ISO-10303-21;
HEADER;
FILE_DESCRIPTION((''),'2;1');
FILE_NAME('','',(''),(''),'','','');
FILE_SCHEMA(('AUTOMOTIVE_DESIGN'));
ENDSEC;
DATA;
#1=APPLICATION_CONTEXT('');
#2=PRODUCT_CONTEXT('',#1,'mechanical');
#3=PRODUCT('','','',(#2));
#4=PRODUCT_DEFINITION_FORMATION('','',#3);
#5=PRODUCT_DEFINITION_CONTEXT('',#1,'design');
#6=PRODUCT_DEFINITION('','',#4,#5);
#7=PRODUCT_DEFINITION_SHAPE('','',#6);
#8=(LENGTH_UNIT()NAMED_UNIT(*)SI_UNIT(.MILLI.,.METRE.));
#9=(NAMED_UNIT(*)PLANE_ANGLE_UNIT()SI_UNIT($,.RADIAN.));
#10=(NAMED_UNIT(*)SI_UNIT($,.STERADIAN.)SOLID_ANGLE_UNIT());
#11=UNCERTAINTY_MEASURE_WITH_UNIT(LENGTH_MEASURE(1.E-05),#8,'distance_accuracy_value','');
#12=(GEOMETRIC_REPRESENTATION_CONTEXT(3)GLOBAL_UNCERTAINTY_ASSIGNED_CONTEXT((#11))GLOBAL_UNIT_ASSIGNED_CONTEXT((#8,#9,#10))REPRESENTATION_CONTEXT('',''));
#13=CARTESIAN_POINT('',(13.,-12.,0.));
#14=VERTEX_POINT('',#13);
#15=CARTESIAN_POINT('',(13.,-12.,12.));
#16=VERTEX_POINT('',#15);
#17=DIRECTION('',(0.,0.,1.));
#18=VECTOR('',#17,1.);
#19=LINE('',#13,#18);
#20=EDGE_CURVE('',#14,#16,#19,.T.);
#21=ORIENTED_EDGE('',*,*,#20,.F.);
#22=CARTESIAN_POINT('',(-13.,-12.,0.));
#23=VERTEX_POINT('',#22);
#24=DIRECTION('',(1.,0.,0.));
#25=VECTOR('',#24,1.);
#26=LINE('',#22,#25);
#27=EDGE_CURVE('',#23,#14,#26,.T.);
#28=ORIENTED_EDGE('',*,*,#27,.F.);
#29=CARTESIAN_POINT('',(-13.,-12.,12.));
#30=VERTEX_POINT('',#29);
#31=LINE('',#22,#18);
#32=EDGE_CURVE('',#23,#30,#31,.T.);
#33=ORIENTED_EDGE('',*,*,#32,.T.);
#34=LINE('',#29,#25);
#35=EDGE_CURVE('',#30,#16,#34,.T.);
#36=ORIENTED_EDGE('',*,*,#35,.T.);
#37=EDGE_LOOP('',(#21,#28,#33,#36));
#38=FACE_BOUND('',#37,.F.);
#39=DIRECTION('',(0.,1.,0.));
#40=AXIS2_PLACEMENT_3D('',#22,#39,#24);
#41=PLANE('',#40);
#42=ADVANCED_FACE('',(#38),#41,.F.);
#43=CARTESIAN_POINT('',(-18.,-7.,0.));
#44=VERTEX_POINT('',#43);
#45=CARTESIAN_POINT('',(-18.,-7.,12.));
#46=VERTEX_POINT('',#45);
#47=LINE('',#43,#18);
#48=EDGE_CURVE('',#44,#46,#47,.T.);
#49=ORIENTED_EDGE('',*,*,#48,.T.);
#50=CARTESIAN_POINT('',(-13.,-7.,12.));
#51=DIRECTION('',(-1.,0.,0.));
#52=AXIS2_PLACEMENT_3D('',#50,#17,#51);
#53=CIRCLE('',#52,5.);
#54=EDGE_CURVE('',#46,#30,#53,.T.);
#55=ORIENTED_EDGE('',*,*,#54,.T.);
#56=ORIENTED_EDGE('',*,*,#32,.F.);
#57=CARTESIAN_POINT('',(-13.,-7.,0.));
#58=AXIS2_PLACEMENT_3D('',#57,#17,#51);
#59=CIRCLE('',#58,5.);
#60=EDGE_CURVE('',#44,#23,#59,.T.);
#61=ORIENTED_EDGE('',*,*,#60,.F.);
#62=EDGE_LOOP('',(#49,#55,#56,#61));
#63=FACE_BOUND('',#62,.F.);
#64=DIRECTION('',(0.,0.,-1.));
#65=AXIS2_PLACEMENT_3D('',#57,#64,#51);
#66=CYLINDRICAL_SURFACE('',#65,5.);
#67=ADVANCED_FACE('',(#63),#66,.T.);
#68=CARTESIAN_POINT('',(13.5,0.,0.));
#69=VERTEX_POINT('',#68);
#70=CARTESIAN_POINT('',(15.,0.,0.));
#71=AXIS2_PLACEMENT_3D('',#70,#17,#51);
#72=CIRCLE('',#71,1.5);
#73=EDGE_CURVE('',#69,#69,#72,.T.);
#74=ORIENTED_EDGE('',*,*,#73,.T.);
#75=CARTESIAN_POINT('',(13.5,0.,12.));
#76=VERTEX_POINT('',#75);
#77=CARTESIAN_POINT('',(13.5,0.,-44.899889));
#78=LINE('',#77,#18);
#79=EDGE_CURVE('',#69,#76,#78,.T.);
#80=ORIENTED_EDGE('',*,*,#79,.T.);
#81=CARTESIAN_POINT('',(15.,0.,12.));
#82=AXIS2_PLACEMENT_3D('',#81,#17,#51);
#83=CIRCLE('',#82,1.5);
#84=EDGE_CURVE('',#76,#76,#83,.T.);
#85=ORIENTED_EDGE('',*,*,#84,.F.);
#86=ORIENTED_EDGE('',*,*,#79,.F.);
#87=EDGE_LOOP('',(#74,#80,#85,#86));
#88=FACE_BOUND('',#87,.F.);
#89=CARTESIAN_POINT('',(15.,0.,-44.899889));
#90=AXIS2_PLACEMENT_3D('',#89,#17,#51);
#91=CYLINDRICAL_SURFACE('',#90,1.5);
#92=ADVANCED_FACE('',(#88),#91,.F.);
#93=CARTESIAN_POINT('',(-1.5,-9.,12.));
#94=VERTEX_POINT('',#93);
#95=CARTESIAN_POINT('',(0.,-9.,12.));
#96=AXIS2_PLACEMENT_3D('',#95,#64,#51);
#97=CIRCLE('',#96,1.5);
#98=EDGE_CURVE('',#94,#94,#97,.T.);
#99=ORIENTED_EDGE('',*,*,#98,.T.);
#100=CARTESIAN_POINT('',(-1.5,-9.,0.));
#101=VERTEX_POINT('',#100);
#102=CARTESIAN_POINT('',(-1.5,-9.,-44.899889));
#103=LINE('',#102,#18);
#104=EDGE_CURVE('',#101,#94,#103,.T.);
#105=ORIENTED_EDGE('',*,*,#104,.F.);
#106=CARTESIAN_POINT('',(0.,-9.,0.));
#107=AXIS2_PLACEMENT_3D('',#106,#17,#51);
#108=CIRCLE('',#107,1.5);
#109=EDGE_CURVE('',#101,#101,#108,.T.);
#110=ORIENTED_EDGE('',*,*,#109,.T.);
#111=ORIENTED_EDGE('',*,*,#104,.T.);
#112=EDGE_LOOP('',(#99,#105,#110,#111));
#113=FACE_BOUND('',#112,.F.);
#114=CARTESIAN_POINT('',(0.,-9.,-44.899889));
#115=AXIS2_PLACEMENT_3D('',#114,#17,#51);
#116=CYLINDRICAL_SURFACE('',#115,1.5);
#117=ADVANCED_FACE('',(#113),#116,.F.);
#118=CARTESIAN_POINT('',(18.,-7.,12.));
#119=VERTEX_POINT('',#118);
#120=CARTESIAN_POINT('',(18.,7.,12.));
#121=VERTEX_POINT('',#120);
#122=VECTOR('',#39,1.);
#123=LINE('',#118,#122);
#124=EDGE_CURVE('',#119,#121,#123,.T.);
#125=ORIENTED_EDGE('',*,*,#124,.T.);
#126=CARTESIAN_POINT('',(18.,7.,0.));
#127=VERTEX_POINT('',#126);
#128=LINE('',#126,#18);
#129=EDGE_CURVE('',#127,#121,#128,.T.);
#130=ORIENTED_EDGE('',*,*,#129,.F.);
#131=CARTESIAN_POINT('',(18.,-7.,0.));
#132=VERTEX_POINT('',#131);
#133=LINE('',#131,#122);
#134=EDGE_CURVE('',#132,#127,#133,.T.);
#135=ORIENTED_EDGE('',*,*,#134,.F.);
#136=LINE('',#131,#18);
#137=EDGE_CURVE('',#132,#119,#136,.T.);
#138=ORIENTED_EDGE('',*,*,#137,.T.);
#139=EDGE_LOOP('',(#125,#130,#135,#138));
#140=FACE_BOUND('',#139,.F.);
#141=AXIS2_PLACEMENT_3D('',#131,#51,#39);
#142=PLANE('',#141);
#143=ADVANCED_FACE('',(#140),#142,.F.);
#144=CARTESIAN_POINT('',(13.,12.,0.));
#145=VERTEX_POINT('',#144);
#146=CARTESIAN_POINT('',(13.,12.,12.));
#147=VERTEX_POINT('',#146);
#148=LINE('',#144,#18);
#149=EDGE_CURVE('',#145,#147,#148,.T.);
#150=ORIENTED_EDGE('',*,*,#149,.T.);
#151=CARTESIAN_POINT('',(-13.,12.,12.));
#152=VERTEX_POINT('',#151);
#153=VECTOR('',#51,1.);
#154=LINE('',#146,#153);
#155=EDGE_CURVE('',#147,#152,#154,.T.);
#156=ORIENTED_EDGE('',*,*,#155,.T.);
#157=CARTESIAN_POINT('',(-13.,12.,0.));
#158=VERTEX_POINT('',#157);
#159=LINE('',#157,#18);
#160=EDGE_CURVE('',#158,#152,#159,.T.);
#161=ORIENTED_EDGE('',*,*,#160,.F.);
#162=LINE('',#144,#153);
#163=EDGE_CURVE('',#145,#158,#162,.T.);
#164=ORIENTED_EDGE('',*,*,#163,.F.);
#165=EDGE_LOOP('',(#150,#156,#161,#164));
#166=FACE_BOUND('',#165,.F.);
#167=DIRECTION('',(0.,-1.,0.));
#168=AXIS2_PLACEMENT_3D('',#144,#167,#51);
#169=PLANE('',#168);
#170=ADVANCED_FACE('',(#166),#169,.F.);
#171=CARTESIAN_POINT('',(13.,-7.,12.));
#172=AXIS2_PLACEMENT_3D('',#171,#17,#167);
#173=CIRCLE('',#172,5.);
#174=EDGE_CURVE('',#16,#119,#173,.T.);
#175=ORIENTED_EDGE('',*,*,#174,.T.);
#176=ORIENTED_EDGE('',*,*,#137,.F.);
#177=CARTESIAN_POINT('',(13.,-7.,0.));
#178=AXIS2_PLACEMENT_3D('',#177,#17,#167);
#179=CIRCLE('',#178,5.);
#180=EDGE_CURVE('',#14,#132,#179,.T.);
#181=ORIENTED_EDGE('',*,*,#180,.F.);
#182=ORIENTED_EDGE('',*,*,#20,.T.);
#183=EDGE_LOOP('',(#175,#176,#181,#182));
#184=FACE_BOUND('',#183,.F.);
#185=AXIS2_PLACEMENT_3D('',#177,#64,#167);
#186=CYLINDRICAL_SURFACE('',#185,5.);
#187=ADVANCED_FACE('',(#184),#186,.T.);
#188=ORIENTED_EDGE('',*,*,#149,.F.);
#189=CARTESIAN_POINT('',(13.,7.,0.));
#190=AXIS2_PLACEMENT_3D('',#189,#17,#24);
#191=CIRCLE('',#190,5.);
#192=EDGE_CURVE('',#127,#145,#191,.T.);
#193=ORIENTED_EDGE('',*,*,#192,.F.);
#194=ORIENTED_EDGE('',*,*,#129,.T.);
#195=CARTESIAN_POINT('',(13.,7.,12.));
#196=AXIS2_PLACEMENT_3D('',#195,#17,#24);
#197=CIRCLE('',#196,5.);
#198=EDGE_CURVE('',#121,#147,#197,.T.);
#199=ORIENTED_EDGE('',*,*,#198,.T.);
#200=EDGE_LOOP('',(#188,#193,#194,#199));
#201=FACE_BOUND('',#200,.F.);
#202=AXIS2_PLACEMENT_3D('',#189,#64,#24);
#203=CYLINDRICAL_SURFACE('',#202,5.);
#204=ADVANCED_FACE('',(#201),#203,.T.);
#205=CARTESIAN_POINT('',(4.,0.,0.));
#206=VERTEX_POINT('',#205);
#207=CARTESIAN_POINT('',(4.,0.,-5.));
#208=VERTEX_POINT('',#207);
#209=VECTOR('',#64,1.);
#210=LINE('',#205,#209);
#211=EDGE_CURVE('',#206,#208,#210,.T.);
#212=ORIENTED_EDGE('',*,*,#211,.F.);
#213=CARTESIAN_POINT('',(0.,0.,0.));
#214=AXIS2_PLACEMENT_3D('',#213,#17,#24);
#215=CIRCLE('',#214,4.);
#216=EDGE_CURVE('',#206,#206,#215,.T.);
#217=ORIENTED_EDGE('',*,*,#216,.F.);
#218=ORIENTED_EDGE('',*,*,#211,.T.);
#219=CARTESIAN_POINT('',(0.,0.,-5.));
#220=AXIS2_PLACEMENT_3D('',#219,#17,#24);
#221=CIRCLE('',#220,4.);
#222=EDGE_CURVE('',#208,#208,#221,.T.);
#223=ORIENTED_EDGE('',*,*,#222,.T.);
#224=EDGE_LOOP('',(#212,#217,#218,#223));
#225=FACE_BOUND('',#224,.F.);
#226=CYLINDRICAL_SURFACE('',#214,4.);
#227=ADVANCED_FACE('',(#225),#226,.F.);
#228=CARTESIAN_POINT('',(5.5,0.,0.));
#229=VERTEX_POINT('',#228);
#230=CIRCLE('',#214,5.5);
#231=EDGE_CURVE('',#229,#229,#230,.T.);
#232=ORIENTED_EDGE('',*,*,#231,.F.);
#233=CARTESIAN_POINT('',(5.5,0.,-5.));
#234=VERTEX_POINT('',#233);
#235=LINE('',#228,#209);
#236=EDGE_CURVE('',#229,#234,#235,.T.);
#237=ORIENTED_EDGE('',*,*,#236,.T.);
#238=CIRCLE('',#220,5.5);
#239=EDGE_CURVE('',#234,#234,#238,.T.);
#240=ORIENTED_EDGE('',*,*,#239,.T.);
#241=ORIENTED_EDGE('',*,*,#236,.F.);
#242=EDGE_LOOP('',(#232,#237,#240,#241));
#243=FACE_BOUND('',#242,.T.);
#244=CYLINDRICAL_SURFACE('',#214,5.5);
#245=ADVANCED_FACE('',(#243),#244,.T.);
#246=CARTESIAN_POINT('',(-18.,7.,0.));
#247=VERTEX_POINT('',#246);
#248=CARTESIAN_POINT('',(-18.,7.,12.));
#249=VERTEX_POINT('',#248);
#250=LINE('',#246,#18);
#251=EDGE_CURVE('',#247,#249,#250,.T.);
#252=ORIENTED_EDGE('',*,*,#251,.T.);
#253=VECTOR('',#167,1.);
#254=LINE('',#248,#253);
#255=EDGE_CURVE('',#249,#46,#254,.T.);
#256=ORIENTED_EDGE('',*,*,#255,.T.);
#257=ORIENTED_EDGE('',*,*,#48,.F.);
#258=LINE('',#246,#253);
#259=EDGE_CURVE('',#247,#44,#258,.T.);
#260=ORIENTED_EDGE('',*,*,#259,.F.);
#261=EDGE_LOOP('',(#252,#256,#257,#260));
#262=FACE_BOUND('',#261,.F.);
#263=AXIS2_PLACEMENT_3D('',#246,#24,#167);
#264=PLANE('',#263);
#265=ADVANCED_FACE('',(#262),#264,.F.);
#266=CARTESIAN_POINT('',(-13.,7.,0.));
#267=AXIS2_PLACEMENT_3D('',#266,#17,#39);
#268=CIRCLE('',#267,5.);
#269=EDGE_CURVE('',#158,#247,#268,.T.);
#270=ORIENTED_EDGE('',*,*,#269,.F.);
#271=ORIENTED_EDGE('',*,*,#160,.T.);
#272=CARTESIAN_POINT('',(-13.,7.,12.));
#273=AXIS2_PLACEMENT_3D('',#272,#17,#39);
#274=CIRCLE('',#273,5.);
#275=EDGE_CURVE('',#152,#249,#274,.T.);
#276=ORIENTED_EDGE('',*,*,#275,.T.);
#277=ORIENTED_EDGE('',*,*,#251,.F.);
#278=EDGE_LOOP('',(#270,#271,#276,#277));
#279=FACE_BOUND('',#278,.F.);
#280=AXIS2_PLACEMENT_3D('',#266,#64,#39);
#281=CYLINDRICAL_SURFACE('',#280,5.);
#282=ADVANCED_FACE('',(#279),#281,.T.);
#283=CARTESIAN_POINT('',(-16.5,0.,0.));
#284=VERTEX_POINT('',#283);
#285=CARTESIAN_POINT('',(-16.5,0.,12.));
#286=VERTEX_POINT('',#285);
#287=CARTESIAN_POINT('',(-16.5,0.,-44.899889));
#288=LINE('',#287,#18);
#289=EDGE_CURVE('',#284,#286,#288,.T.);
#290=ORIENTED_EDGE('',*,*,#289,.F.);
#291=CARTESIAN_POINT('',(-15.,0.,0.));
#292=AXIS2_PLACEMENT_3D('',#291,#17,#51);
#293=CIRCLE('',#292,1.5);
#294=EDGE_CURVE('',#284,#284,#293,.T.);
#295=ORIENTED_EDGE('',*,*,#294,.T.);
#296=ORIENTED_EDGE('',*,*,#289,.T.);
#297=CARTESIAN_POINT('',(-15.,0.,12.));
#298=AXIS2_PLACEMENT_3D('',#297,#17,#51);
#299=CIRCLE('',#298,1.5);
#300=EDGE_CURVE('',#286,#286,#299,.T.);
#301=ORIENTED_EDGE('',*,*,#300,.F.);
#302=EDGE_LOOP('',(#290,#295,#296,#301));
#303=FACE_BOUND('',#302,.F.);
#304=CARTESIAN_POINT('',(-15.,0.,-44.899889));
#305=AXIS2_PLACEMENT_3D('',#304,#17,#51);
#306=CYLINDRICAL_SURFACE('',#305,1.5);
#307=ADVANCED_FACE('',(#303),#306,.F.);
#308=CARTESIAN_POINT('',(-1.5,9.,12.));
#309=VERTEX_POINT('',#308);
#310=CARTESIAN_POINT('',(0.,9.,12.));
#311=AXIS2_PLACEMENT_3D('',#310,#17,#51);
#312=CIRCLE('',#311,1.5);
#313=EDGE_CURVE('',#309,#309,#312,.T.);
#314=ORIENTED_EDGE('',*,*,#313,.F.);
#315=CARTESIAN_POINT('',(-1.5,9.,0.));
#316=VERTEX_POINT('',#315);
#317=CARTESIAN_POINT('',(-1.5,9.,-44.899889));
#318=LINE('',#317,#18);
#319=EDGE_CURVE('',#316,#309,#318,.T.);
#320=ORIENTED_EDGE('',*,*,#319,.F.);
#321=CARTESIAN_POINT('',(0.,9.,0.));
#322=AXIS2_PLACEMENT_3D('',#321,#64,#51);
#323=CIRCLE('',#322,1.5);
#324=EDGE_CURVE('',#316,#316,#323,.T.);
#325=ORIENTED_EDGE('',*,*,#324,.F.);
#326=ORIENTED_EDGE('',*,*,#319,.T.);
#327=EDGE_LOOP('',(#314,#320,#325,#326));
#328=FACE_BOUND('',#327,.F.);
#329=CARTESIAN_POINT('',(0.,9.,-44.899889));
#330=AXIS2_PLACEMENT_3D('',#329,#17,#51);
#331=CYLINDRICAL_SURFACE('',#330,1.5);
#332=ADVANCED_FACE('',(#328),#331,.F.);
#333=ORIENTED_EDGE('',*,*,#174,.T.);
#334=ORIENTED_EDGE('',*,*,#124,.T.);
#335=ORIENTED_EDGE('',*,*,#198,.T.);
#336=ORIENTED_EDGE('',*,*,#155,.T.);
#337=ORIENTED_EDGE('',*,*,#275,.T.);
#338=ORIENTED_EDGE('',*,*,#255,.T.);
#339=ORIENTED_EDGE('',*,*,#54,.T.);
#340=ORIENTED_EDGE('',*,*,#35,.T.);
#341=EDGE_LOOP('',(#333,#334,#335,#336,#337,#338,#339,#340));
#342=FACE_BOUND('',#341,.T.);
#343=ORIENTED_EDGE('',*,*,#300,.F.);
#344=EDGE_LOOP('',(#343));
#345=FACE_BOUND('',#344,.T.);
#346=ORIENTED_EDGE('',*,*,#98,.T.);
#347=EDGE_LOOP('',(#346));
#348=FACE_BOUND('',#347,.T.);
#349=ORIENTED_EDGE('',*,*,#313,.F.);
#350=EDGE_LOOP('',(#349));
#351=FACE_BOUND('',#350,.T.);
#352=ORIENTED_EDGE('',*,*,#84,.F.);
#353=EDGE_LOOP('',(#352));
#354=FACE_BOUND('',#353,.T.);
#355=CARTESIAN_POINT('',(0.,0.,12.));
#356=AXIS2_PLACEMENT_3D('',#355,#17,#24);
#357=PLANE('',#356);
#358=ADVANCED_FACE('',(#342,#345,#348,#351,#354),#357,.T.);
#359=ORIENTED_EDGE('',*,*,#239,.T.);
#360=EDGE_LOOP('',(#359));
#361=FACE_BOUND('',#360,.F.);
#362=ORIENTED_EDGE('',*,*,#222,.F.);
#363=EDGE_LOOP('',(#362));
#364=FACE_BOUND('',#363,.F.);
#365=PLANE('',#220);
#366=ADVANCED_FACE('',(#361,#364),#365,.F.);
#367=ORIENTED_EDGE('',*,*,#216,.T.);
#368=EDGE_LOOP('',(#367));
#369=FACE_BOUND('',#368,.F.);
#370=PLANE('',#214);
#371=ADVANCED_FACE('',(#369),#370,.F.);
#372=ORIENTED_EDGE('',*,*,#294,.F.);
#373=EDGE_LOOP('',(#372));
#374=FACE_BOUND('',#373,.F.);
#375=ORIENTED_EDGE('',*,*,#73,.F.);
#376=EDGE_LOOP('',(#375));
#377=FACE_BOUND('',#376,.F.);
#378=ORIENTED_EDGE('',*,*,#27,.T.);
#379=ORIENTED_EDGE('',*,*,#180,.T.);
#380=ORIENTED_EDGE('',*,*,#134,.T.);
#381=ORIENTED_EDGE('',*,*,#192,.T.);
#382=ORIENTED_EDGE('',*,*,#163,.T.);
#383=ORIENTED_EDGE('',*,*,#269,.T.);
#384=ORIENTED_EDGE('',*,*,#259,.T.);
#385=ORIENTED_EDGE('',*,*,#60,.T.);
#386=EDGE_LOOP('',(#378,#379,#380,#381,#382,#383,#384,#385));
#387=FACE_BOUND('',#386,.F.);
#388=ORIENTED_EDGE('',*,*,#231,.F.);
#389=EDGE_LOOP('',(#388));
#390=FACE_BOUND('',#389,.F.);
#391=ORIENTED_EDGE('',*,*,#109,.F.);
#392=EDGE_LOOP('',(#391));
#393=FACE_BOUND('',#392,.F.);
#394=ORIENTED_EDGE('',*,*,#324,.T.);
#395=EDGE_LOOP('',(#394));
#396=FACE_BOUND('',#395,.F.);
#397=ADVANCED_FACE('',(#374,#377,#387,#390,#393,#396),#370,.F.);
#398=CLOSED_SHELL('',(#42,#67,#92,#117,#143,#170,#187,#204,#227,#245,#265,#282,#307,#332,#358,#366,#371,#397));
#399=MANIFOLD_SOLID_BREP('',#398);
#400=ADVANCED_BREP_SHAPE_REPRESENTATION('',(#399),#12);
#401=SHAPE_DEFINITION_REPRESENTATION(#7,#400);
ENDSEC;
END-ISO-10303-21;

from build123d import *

# Parameters (mm, degrees)
F0_R     = 5.5
F0_R_2   = 4
F1_DEPTH = 12
F2_D     = 3
F3_R     = 2.5
F3_R_2   = 1.5
F4_DEPTH = 12
F6_DEPTH = 5


# Not quite as in the source:
# - a feature of the source that left no trace in its solid (it failed there, or was rolled back) is left out


with BuildPart() as f1:
    # F0 (on Top) → F1 (new body)
    with BuildSketch(Plane.XY):
        with BuildLine():
            Line((13, 12), (-13, 12))
            ThreePointArc((-13, 12), (-16.5355339059, 10.5355339059), (-18, 7))
            Line((-18, 7), (-18, -7))
            ThreePointArc((-18, -7), (-16.5355339059, -10.5355339059), (-13, -12))
            Line((-13, -12), (13, -12))
            ThreePointArc((13, -12), (16.5355339059, -10.5355339059), (18, -7))
            Line((18, -7), (18, 7))
            ThreePointArc((18, 7), (16.5355339059, 10.5355339059), (13, 12))
        make_face()
        Circle(F0_R, mode=Mode.SUBTRACT)
        Circle(F0_R)
        Circle(F0_R_2, mode=Mode.SUBTRACT)
        Circle(F0_R_2)
    extrude(amount=F1_DEPTH)

    # F2 (through all)
    with Locations(Plane(origin=(0, 0, 0), x_dir=(1, 0, 0), z_dir=(0, 0, -1))):
        with Locations((15, 0), (0, 9), (0, -9), (-15, 0)):
            Hole(F2_D / 2)

    # F3 (on face) → F4 (join, through all)
    with BuildSketch(Plane.XY):
        with Locations((0, 9)):
            Circle(F3_R)
        with Locations((0, 9)):
            Circle(F3_R_2, mode=Mode.SUBTRACT)
        with Locations((0, -9)):
            Circle(F3_R)
        with Locations((0, -9)):
            Circle(F3_R_2, mode=Mode.SUBTRACT)
    extrude(amount=F4_DEPTH)

    # F0 (on Top) → F6 (join)
    with BuildSketch(Plane.XY):
        Circle(F0_R)
        Circle(F0_R_2, mode=Mode.SUBTRACT)
    extrude(amount=-F6_DEPTH)


solid = f1.part
